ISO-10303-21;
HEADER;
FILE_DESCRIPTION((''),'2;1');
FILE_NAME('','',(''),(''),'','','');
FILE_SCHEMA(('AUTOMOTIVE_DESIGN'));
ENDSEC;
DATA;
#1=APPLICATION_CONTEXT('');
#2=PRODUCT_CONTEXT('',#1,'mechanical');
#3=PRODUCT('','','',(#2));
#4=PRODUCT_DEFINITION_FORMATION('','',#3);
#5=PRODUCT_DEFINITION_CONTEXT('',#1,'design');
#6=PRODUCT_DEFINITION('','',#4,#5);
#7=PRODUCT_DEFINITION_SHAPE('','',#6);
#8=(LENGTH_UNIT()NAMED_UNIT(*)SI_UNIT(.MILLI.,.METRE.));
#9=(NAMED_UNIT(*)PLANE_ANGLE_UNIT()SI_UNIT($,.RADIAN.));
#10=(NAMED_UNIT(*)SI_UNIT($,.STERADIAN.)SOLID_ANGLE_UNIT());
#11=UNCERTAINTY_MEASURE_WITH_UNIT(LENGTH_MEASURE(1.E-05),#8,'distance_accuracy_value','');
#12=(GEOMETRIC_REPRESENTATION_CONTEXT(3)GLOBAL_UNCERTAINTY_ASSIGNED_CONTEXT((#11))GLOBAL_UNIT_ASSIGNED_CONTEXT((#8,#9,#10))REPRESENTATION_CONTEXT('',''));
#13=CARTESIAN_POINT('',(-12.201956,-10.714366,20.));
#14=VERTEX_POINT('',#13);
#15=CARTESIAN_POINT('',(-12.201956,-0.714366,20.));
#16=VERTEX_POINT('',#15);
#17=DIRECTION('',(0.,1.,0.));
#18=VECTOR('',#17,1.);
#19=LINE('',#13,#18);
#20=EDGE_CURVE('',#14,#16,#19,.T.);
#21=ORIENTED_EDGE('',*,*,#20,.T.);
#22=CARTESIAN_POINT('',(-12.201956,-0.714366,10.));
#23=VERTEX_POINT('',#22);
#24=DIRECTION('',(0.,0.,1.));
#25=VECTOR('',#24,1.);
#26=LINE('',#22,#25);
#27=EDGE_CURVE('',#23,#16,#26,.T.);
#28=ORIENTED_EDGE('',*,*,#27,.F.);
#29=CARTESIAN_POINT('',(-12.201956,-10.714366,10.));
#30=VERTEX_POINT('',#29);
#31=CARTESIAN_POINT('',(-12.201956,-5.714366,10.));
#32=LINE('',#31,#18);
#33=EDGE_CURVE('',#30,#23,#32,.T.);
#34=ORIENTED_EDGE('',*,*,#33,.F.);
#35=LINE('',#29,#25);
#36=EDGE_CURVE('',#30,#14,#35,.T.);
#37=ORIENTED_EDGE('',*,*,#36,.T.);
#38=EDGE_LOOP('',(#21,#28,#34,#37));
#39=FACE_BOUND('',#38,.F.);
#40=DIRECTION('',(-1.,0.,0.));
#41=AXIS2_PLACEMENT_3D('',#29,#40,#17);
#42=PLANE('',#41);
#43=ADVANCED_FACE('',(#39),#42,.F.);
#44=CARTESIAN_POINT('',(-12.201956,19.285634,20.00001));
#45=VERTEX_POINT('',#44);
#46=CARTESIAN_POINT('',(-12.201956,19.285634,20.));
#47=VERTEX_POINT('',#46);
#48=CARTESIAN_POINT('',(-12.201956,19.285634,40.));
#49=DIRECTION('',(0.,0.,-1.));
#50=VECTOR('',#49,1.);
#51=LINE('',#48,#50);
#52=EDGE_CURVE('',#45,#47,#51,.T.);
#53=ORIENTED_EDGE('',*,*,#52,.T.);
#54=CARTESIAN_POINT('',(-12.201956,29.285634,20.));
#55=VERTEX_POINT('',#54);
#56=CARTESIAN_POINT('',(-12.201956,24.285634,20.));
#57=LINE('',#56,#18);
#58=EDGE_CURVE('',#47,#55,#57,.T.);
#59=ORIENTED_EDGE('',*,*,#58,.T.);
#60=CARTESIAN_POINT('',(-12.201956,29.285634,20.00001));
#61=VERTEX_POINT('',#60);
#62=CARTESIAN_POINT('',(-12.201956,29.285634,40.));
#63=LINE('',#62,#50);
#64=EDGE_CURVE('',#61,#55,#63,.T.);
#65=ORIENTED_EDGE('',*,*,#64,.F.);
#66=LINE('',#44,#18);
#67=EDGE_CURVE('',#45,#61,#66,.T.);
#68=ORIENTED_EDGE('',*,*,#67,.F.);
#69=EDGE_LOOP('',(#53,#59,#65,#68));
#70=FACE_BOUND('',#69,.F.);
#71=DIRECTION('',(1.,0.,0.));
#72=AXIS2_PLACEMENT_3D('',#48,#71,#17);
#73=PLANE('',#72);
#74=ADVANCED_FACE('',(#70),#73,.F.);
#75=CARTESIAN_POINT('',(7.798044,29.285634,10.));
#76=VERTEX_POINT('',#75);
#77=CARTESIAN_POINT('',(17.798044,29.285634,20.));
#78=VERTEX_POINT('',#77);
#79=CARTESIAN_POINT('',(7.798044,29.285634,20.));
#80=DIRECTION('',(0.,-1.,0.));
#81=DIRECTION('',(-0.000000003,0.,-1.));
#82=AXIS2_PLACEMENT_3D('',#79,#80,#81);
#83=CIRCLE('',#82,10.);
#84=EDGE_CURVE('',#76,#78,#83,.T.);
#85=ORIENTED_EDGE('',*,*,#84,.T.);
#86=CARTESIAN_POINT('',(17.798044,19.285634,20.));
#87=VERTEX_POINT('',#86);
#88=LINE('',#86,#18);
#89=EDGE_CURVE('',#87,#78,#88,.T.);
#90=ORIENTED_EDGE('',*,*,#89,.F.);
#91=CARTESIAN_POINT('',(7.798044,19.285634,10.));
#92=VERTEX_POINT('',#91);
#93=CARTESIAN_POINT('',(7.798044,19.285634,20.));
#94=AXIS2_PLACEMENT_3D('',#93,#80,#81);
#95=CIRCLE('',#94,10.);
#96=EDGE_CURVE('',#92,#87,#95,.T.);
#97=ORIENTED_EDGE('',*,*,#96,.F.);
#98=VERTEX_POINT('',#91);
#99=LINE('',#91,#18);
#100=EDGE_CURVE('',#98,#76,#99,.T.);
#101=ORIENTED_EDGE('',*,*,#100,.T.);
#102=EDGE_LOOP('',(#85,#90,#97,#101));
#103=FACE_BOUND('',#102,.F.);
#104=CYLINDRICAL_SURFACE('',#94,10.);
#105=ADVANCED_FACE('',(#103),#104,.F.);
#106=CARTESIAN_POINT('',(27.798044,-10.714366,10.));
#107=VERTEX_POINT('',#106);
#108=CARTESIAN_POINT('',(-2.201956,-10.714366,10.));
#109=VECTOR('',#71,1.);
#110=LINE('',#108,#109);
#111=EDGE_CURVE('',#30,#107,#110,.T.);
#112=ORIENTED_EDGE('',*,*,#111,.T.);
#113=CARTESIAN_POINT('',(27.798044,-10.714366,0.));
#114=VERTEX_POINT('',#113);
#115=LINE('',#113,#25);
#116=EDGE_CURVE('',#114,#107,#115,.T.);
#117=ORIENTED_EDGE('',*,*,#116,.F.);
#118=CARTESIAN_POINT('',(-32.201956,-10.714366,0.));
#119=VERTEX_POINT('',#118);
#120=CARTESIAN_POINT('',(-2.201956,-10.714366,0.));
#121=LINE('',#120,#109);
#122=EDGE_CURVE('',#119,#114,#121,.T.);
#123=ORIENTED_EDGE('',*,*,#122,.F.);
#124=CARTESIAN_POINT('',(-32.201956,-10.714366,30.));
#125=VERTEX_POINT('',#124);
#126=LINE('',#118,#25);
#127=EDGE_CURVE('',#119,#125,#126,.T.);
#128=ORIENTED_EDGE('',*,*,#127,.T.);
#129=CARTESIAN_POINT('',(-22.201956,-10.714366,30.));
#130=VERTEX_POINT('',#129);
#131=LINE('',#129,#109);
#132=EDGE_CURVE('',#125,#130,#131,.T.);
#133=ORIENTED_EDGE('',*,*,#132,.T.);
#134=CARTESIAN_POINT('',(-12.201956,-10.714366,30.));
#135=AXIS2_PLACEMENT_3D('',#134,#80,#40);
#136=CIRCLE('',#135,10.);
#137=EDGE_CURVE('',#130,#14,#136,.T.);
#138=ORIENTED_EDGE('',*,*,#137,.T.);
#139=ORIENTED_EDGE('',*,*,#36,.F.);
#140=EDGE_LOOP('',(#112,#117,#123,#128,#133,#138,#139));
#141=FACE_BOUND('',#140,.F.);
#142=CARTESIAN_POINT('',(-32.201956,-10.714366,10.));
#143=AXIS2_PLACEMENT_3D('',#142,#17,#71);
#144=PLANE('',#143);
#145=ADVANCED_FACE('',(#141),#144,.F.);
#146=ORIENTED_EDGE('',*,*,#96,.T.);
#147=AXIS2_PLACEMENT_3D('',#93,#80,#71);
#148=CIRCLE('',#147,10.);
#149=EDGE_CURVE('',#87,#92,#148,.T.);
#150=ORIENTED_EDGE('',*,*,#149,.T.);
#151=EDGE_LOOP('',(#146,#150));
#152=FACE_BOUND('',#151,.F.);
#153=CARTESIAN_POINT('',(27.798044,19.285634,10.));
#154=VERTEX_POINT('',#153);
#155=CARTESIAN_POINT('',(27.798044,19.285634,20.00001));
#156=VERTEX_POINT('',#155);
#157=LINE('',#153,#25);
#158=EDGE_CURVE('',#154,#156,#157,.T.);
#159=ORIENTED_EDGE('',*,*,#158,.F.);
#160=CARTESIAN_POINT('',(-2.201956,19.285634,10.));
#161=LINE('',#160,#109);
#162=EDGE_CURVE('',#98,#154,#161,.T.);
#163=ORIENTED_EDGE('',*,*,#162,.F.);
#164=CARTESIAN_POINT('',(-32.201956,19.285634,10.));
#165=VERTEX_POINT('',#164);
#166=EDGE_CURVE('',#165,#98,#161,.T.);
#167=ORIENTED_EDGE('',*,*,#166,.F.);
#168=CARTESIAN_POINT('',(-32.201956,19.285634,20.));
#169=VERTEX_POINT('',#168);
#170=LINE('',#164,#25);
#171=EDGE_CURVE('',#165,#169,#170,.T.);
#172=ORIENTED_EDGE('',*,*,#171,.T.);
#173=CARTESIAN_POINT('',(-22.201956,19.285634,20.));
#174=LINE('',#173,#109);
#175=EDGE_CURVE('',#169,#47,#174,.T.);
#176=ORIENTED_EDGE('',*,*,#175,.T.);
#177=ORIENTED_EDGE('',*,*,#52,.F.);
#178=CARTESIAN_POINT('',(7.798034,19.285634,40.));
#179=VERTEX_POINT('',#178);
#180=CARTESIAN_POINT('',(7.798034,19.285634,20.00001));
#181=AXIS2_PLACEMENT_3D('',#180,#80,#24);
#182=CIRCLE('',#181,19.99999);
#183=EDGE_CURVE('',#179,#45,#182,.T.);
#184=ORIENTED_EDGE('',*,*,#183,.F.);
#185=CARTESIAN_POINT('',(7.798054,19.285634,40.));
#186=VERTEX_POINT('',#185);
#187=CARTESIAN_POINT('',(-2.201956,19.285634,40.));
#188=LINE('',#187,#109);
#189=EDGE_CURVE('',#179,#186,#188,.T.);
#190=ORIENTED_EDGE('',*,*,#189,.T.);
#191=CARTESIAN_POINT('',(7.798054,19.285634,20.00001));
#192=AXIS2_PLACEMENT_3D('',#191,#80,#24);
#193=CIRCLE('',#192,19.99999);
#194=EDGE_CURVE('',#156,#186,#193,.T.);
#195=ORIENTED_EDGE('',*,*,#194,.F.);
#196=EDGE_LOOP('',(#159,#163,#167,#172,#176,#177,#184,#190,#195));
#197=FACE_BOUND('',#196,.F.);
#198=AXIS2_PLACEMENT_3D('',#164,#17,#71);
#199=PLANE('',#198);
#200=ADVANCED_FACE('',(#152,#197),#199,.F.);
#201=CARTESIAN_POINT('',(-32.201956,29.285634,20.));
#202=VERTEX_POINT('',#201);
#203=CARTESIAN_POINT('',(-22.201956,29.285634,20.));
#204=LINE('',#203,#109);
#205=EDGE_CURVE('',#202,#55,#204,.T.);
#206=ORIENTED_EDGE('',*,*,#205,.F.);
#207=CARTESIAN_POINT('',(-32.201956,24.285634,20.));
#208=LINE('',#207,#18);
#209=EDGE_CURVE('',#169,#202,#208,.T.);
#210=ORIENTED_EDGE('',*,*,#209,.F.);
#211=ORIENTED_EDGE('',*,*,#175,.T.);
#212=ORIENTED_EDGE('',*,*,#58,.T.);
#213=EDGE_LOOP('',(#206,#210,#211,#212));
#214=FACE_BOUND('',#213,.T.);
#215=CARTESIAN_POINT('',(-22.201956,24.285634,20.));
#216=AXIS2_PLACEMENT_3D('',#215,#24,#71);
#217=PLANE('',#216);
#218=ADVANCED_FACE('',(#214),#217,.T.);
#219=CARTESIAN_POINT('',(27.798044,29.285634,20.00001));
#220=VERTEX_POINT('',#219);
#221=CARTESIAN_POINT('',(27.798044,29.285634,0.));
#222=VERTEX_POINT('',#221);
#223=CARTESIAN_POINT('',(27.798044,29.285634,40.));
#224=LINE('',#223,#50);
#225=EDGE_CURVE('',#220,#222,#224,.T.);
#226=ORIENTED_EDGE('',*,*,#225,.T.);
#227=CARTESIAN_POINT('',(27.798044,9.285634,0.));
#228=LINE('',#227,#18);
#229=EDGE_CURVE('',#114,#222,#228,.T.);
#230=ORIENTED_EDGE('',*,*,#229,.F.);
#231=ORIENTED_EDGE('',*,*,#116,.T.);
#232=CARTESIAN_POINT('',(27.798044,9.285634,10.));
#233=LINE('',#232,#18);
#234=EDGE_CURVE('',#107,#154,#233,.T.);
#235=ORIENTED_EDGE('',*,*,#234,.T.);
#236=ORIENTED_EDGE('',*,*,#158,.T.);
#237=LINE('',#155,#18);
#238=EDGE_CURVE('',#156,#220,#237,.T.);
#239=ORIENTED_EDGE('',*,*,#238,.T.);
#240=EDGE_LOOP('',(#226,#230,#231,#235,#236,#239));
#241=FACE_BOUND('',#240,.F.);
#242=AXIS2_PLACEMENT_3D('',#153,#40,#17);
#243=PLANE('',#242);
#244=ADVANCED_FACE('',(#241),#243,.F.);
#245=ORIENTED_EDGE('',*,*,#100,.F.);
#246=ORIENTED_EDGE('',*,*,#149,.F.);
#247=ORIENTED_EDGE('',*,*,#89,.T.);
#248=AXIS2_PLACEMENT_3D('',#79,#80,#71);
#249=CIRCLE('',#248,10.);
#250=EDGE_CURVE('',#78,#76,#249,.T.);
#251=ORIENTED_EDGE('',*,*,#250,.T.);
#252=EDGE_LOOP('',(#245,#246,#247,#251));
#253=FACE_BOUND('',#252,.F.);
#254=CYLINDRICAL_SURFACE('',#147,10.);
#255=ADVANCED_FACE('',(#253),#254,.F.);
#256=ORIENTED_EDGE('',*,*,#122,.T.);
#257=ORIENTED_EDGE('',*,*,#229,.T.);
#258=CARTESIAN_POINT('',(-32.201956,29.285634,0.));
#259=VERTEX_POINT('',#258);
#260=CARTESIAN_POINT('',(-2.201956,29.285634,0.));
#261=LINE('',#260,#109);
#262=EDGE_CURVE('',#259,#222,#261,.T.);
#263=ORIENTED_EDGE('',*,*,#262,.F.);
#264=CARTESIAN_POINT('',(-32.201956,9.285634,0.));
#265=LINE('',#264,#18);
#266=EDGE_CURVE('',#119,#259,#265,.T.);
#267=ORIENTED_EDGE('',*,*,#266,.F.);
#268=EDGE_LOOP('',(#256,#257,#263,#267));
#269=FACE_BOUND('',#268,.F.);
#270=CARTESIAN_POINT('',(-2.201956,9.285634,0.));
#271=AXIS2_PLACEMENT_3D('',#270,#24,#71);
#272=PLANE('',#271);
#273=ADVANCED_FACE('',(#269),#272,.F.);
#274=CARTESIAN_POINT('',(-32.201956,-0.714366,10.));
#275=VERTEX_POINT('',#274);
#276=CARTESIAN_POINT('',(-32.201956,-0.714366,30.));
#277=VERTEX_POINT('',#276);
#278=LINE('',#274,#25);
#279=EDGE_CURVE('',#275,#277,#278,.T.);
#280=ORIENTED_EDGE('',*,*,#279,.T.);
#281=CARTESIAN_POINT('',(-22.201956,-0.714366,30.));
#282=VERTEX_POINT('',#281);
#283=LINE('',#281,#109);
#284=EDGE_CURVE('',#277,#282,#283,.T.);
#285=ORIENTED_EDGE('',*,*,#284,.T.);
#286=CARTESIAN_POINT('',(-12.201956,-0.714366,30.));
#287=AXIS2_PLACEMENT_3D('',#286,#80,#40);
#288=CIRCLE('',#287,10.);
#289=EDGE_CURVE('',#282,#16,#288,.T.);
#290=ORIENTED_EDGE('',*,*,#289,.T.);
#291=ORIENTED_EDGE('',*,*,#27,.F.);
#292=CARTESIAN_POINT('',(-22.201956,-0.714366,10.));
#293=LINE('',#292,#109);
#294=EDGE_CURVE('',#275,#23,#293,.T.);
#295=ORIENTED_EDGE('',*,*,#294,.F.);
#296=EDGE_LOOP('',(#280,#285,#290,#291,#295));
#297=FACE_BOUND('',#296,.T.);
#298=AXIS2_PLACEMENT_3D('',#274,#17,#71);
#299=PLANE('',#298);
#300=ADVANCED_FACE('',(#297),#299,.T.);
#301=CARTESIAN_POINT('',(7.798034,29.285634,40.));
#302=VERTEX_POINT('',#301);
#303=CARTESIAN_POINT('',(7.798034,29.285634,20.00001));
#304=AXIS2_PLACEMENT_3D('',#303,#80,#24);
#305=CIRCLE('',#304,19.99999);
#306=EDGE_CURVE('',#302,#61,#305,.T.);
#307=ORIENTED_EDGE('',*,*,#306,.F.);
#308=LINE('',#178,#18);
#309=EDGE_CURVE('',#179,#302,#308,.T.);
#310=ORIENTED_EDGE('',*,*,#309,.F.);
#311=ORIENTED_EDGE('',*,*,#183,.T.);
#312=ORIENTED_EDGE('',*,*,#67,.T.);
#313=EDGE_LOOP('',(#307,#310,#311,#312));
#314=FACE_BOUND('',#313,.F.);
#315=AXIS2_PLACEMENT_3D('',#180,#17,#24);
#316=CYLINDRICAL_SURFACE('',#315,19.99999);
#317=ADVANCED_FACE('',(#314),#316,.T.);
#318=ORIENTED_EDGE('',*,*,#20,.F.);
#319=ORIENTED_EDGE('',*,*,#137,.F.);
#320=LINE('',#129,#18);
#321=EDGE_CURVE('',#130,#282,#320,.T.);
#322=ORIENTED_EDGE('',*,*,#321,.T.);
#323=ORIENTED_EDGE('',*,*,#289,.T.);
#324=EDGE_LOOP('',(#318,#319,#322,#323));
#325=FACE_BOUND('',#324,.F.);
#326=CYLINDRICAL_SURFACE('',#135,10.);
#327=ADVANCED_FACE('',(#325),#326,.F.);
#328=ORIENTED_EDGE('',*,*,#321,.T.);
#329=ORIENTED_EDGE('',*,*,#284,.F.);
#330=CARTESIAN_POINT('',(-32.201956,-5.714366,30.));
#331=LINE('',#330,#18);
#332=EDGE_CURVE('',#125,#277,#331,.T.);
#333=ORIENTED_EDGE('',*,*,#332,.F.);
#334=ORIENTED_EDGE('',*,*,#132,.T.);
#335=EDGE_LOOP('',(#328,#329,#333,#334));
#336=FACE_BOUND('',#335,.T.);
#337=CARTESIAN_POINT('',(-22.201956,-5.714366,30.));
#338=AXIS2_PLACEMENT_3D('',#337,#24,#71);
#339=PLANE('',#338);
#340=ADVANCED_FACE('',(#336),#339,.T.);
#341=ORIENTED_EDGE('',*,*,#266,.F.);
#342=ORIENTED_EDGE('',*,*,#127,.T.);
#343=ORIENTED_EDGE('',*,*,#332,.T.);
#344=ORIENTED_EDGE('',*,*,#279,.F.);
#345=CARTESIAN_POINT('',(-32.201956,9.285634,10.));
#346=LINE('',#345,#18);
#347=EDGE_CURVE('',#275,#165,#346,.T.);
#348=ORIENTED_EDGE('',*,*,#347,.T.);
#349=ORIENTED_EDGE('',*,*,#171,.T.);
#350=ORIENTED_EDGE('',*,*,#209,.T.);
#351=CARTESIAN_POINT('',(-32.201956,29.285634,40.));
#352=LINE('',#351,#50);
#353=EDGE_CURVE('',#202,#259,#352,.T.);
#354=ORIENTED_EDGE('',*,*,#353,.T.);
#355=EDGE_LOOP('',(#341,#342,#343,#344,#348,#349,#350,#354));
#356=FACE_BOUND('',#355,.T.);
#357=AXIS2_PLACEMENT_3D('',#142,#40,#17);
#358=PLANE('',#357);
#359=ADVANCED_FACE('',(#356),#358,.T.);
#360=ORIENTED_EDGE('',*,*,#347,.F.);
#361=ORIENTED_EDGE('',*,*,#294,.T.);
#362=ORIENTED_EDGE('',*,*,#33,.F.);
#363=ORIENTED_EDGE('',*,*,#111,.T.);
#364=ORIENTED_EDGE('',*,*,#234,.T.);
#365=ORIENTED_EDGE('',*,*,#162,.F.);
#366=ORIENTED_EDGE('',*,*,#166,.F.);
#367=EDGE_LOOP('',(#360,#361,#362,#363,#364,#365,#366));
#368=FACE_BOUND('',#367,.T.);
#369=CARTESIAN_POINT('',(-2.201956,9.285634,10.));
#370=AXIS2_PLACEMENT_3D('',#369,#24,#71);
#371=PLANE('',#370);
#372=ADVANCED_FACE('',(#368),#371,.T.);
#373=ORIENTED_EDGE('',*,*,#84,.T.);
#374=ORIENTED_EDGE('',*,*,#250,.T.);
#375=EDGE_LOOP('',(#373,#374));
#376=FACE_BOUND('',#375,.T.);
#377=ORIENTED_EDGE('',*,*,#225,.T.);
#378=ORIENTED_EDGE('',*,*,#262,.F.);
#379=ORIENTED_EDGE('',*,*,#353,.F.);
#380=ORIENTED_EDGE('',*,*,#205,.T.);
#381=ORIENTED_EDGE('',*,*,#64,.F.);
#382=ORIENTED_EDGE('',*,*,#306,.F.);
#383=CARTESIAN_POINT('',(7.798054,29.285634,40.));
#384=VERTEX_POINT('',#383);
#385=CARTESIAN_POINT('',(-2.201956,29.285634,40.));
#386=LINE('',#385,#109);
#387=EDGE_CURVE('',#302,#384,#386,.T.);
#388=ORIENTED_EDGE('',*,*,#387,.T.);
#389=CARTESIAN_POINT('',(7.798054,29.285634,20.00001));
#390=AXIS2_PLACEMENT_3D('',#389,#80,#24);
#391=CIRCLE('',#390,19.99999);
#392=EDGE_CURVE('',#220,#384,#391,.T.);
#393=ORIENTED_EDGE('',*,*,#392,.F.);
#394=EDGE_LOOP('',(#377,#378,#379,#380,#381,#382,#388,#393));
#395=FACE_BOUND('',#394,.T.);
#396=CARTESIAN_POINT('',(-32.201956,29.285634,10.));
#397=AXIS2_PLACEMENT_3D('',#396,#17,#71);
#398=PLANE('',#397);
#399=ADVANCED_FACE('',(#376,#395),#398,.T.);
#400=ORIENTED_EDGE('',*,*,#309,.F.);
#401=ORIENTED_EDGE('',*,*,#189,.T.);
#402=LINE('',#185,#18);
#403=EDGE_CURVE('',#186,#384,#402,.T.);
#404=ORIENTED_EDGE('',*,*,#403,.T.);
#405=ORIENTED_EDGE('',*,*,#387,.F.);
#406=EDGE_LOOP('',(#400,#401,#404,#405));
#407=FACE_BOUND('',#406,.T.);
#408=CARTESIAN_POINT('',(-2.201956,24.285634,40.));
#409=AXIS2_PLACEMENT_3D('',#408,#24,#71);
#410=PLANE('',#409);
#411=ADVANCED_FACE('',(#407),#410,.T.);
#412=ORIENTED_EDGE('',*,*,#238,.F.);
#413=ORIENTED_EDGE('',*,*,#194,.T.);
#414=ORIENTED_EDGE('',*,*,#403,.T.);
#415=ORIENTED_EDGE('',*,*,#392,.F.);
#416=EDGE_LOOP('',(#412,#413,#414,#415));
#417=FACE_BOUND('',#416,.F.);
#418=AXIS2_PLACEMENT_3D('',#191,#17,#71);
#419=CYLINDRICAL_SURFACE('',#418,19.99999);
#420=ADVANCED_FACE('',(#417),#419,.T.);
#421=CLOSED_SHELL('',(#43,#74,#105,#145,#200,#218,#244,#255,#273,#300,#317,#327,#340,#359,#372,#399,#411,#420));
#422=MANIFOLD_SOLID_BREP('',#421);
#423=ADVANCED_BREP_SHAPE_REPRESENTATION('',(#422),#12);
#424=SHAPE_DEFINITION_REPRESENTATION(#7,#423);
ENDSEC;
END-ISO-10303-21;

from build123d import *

# Parameters (mm, degrees)
F0_W      = 60
F0_H      = 40
F1_DEPTH  = 10
F2_W      = 60
F2_H      = 10
F3_DEPTH  = 30
F4_W      = 20
F4_H      = 10
F5_DEPTH  = 20
F6_R      = 19.99999
F8_DEPTH  = 10
F9_W      = 20
F9_H      = 10
F10_DEPTH = 20
F12_DEPTH = 10


# Not quite as in the source:
# - a fillet or chamfer is up to 0.001 mm smaller than in the source, because OpenCascade refuses the exact size


with BuildPart() as f1:
    # F0 (on Top) → F1 (new body)
    with BuildSketch(Plane.XY):
        with Locations((-2.2019557655, 9.2856339355)):
            Rectangle(F0_W, F0_H)
    extrude(amount=F1_DEPTH)

    # F2 (on face) → F3 (join)
    with BuildSketch(Plane.XY.offset(10)):
        with Locations((-2.2019557655, 24.2856339355)):
            Rectangle(F2_W, F2_H)
    extrude(amount=F3_DEPTH)

    # F4 (on face) → F5 (cut)
    with BuildSketch(Plane.XY.offset(40)):
        with Locations((-22.2019557655, 24.2856339355)):
            Rectangle(F4_W, F4_H)
    extrude(amount=-F5_DEPTH, mode=Mode.SUBTRACT)

    # F6 (radius 20 in the source; OpenCascade refuses exactly that, so slightly less here)
    f6_edges = [f1.edges().sort_by_distance(p)[0] for p in [
        (-12.201956, 24.285634, 40),
        (27.798044, 24.285634, 40),
    ]]
    fillet(f6_edges, radius=F6_R)

    # F7 (on face) → F8 (cut)
    with BuildSketch(Plane.XZ.offset(-19.2856339355)):
        with BuildLine():
            ThreePointArc((7.7980442039, 10), (14.8691120356, 12.9289321773), (17.7980442345, 20))
            ThreePointArc((17.7980442345, 20), (0.7269764335, 27.0710678227), (7.7980442039, 10))
        make_face()
    extrude(amount=-F8_DEPTH, mode=Mode.SUBTRACT)

    # F9 (on face) → F10 (join)
    with BuildSketch(Plane.XY.offset(10)):
        with Locations((-22.2019557655, -5.7143660645)):
            Rectangle(F9_W, F9_H)
    extrude(amount=F10_DEPTH)

    # F11 (on face) → F12 (cut)
    with BuildSketch(Plane.XZ.offset(10.7143660645)):
        with BuildLine():
            Line((-12.2019557655, 30), (-22.2019557655, 30))
            ThreePointArc((-22.2019557655, 30), (-19.2730235774, 22.9289321881), (-12.2019557655, 20))
            Line((-12.2019557655, 20), (-12.2019557655, 30))
        make_face()
    extrude(amount=-F12_DEPTH, mode=Mode.SUBTRACT)


solid = f1.part
